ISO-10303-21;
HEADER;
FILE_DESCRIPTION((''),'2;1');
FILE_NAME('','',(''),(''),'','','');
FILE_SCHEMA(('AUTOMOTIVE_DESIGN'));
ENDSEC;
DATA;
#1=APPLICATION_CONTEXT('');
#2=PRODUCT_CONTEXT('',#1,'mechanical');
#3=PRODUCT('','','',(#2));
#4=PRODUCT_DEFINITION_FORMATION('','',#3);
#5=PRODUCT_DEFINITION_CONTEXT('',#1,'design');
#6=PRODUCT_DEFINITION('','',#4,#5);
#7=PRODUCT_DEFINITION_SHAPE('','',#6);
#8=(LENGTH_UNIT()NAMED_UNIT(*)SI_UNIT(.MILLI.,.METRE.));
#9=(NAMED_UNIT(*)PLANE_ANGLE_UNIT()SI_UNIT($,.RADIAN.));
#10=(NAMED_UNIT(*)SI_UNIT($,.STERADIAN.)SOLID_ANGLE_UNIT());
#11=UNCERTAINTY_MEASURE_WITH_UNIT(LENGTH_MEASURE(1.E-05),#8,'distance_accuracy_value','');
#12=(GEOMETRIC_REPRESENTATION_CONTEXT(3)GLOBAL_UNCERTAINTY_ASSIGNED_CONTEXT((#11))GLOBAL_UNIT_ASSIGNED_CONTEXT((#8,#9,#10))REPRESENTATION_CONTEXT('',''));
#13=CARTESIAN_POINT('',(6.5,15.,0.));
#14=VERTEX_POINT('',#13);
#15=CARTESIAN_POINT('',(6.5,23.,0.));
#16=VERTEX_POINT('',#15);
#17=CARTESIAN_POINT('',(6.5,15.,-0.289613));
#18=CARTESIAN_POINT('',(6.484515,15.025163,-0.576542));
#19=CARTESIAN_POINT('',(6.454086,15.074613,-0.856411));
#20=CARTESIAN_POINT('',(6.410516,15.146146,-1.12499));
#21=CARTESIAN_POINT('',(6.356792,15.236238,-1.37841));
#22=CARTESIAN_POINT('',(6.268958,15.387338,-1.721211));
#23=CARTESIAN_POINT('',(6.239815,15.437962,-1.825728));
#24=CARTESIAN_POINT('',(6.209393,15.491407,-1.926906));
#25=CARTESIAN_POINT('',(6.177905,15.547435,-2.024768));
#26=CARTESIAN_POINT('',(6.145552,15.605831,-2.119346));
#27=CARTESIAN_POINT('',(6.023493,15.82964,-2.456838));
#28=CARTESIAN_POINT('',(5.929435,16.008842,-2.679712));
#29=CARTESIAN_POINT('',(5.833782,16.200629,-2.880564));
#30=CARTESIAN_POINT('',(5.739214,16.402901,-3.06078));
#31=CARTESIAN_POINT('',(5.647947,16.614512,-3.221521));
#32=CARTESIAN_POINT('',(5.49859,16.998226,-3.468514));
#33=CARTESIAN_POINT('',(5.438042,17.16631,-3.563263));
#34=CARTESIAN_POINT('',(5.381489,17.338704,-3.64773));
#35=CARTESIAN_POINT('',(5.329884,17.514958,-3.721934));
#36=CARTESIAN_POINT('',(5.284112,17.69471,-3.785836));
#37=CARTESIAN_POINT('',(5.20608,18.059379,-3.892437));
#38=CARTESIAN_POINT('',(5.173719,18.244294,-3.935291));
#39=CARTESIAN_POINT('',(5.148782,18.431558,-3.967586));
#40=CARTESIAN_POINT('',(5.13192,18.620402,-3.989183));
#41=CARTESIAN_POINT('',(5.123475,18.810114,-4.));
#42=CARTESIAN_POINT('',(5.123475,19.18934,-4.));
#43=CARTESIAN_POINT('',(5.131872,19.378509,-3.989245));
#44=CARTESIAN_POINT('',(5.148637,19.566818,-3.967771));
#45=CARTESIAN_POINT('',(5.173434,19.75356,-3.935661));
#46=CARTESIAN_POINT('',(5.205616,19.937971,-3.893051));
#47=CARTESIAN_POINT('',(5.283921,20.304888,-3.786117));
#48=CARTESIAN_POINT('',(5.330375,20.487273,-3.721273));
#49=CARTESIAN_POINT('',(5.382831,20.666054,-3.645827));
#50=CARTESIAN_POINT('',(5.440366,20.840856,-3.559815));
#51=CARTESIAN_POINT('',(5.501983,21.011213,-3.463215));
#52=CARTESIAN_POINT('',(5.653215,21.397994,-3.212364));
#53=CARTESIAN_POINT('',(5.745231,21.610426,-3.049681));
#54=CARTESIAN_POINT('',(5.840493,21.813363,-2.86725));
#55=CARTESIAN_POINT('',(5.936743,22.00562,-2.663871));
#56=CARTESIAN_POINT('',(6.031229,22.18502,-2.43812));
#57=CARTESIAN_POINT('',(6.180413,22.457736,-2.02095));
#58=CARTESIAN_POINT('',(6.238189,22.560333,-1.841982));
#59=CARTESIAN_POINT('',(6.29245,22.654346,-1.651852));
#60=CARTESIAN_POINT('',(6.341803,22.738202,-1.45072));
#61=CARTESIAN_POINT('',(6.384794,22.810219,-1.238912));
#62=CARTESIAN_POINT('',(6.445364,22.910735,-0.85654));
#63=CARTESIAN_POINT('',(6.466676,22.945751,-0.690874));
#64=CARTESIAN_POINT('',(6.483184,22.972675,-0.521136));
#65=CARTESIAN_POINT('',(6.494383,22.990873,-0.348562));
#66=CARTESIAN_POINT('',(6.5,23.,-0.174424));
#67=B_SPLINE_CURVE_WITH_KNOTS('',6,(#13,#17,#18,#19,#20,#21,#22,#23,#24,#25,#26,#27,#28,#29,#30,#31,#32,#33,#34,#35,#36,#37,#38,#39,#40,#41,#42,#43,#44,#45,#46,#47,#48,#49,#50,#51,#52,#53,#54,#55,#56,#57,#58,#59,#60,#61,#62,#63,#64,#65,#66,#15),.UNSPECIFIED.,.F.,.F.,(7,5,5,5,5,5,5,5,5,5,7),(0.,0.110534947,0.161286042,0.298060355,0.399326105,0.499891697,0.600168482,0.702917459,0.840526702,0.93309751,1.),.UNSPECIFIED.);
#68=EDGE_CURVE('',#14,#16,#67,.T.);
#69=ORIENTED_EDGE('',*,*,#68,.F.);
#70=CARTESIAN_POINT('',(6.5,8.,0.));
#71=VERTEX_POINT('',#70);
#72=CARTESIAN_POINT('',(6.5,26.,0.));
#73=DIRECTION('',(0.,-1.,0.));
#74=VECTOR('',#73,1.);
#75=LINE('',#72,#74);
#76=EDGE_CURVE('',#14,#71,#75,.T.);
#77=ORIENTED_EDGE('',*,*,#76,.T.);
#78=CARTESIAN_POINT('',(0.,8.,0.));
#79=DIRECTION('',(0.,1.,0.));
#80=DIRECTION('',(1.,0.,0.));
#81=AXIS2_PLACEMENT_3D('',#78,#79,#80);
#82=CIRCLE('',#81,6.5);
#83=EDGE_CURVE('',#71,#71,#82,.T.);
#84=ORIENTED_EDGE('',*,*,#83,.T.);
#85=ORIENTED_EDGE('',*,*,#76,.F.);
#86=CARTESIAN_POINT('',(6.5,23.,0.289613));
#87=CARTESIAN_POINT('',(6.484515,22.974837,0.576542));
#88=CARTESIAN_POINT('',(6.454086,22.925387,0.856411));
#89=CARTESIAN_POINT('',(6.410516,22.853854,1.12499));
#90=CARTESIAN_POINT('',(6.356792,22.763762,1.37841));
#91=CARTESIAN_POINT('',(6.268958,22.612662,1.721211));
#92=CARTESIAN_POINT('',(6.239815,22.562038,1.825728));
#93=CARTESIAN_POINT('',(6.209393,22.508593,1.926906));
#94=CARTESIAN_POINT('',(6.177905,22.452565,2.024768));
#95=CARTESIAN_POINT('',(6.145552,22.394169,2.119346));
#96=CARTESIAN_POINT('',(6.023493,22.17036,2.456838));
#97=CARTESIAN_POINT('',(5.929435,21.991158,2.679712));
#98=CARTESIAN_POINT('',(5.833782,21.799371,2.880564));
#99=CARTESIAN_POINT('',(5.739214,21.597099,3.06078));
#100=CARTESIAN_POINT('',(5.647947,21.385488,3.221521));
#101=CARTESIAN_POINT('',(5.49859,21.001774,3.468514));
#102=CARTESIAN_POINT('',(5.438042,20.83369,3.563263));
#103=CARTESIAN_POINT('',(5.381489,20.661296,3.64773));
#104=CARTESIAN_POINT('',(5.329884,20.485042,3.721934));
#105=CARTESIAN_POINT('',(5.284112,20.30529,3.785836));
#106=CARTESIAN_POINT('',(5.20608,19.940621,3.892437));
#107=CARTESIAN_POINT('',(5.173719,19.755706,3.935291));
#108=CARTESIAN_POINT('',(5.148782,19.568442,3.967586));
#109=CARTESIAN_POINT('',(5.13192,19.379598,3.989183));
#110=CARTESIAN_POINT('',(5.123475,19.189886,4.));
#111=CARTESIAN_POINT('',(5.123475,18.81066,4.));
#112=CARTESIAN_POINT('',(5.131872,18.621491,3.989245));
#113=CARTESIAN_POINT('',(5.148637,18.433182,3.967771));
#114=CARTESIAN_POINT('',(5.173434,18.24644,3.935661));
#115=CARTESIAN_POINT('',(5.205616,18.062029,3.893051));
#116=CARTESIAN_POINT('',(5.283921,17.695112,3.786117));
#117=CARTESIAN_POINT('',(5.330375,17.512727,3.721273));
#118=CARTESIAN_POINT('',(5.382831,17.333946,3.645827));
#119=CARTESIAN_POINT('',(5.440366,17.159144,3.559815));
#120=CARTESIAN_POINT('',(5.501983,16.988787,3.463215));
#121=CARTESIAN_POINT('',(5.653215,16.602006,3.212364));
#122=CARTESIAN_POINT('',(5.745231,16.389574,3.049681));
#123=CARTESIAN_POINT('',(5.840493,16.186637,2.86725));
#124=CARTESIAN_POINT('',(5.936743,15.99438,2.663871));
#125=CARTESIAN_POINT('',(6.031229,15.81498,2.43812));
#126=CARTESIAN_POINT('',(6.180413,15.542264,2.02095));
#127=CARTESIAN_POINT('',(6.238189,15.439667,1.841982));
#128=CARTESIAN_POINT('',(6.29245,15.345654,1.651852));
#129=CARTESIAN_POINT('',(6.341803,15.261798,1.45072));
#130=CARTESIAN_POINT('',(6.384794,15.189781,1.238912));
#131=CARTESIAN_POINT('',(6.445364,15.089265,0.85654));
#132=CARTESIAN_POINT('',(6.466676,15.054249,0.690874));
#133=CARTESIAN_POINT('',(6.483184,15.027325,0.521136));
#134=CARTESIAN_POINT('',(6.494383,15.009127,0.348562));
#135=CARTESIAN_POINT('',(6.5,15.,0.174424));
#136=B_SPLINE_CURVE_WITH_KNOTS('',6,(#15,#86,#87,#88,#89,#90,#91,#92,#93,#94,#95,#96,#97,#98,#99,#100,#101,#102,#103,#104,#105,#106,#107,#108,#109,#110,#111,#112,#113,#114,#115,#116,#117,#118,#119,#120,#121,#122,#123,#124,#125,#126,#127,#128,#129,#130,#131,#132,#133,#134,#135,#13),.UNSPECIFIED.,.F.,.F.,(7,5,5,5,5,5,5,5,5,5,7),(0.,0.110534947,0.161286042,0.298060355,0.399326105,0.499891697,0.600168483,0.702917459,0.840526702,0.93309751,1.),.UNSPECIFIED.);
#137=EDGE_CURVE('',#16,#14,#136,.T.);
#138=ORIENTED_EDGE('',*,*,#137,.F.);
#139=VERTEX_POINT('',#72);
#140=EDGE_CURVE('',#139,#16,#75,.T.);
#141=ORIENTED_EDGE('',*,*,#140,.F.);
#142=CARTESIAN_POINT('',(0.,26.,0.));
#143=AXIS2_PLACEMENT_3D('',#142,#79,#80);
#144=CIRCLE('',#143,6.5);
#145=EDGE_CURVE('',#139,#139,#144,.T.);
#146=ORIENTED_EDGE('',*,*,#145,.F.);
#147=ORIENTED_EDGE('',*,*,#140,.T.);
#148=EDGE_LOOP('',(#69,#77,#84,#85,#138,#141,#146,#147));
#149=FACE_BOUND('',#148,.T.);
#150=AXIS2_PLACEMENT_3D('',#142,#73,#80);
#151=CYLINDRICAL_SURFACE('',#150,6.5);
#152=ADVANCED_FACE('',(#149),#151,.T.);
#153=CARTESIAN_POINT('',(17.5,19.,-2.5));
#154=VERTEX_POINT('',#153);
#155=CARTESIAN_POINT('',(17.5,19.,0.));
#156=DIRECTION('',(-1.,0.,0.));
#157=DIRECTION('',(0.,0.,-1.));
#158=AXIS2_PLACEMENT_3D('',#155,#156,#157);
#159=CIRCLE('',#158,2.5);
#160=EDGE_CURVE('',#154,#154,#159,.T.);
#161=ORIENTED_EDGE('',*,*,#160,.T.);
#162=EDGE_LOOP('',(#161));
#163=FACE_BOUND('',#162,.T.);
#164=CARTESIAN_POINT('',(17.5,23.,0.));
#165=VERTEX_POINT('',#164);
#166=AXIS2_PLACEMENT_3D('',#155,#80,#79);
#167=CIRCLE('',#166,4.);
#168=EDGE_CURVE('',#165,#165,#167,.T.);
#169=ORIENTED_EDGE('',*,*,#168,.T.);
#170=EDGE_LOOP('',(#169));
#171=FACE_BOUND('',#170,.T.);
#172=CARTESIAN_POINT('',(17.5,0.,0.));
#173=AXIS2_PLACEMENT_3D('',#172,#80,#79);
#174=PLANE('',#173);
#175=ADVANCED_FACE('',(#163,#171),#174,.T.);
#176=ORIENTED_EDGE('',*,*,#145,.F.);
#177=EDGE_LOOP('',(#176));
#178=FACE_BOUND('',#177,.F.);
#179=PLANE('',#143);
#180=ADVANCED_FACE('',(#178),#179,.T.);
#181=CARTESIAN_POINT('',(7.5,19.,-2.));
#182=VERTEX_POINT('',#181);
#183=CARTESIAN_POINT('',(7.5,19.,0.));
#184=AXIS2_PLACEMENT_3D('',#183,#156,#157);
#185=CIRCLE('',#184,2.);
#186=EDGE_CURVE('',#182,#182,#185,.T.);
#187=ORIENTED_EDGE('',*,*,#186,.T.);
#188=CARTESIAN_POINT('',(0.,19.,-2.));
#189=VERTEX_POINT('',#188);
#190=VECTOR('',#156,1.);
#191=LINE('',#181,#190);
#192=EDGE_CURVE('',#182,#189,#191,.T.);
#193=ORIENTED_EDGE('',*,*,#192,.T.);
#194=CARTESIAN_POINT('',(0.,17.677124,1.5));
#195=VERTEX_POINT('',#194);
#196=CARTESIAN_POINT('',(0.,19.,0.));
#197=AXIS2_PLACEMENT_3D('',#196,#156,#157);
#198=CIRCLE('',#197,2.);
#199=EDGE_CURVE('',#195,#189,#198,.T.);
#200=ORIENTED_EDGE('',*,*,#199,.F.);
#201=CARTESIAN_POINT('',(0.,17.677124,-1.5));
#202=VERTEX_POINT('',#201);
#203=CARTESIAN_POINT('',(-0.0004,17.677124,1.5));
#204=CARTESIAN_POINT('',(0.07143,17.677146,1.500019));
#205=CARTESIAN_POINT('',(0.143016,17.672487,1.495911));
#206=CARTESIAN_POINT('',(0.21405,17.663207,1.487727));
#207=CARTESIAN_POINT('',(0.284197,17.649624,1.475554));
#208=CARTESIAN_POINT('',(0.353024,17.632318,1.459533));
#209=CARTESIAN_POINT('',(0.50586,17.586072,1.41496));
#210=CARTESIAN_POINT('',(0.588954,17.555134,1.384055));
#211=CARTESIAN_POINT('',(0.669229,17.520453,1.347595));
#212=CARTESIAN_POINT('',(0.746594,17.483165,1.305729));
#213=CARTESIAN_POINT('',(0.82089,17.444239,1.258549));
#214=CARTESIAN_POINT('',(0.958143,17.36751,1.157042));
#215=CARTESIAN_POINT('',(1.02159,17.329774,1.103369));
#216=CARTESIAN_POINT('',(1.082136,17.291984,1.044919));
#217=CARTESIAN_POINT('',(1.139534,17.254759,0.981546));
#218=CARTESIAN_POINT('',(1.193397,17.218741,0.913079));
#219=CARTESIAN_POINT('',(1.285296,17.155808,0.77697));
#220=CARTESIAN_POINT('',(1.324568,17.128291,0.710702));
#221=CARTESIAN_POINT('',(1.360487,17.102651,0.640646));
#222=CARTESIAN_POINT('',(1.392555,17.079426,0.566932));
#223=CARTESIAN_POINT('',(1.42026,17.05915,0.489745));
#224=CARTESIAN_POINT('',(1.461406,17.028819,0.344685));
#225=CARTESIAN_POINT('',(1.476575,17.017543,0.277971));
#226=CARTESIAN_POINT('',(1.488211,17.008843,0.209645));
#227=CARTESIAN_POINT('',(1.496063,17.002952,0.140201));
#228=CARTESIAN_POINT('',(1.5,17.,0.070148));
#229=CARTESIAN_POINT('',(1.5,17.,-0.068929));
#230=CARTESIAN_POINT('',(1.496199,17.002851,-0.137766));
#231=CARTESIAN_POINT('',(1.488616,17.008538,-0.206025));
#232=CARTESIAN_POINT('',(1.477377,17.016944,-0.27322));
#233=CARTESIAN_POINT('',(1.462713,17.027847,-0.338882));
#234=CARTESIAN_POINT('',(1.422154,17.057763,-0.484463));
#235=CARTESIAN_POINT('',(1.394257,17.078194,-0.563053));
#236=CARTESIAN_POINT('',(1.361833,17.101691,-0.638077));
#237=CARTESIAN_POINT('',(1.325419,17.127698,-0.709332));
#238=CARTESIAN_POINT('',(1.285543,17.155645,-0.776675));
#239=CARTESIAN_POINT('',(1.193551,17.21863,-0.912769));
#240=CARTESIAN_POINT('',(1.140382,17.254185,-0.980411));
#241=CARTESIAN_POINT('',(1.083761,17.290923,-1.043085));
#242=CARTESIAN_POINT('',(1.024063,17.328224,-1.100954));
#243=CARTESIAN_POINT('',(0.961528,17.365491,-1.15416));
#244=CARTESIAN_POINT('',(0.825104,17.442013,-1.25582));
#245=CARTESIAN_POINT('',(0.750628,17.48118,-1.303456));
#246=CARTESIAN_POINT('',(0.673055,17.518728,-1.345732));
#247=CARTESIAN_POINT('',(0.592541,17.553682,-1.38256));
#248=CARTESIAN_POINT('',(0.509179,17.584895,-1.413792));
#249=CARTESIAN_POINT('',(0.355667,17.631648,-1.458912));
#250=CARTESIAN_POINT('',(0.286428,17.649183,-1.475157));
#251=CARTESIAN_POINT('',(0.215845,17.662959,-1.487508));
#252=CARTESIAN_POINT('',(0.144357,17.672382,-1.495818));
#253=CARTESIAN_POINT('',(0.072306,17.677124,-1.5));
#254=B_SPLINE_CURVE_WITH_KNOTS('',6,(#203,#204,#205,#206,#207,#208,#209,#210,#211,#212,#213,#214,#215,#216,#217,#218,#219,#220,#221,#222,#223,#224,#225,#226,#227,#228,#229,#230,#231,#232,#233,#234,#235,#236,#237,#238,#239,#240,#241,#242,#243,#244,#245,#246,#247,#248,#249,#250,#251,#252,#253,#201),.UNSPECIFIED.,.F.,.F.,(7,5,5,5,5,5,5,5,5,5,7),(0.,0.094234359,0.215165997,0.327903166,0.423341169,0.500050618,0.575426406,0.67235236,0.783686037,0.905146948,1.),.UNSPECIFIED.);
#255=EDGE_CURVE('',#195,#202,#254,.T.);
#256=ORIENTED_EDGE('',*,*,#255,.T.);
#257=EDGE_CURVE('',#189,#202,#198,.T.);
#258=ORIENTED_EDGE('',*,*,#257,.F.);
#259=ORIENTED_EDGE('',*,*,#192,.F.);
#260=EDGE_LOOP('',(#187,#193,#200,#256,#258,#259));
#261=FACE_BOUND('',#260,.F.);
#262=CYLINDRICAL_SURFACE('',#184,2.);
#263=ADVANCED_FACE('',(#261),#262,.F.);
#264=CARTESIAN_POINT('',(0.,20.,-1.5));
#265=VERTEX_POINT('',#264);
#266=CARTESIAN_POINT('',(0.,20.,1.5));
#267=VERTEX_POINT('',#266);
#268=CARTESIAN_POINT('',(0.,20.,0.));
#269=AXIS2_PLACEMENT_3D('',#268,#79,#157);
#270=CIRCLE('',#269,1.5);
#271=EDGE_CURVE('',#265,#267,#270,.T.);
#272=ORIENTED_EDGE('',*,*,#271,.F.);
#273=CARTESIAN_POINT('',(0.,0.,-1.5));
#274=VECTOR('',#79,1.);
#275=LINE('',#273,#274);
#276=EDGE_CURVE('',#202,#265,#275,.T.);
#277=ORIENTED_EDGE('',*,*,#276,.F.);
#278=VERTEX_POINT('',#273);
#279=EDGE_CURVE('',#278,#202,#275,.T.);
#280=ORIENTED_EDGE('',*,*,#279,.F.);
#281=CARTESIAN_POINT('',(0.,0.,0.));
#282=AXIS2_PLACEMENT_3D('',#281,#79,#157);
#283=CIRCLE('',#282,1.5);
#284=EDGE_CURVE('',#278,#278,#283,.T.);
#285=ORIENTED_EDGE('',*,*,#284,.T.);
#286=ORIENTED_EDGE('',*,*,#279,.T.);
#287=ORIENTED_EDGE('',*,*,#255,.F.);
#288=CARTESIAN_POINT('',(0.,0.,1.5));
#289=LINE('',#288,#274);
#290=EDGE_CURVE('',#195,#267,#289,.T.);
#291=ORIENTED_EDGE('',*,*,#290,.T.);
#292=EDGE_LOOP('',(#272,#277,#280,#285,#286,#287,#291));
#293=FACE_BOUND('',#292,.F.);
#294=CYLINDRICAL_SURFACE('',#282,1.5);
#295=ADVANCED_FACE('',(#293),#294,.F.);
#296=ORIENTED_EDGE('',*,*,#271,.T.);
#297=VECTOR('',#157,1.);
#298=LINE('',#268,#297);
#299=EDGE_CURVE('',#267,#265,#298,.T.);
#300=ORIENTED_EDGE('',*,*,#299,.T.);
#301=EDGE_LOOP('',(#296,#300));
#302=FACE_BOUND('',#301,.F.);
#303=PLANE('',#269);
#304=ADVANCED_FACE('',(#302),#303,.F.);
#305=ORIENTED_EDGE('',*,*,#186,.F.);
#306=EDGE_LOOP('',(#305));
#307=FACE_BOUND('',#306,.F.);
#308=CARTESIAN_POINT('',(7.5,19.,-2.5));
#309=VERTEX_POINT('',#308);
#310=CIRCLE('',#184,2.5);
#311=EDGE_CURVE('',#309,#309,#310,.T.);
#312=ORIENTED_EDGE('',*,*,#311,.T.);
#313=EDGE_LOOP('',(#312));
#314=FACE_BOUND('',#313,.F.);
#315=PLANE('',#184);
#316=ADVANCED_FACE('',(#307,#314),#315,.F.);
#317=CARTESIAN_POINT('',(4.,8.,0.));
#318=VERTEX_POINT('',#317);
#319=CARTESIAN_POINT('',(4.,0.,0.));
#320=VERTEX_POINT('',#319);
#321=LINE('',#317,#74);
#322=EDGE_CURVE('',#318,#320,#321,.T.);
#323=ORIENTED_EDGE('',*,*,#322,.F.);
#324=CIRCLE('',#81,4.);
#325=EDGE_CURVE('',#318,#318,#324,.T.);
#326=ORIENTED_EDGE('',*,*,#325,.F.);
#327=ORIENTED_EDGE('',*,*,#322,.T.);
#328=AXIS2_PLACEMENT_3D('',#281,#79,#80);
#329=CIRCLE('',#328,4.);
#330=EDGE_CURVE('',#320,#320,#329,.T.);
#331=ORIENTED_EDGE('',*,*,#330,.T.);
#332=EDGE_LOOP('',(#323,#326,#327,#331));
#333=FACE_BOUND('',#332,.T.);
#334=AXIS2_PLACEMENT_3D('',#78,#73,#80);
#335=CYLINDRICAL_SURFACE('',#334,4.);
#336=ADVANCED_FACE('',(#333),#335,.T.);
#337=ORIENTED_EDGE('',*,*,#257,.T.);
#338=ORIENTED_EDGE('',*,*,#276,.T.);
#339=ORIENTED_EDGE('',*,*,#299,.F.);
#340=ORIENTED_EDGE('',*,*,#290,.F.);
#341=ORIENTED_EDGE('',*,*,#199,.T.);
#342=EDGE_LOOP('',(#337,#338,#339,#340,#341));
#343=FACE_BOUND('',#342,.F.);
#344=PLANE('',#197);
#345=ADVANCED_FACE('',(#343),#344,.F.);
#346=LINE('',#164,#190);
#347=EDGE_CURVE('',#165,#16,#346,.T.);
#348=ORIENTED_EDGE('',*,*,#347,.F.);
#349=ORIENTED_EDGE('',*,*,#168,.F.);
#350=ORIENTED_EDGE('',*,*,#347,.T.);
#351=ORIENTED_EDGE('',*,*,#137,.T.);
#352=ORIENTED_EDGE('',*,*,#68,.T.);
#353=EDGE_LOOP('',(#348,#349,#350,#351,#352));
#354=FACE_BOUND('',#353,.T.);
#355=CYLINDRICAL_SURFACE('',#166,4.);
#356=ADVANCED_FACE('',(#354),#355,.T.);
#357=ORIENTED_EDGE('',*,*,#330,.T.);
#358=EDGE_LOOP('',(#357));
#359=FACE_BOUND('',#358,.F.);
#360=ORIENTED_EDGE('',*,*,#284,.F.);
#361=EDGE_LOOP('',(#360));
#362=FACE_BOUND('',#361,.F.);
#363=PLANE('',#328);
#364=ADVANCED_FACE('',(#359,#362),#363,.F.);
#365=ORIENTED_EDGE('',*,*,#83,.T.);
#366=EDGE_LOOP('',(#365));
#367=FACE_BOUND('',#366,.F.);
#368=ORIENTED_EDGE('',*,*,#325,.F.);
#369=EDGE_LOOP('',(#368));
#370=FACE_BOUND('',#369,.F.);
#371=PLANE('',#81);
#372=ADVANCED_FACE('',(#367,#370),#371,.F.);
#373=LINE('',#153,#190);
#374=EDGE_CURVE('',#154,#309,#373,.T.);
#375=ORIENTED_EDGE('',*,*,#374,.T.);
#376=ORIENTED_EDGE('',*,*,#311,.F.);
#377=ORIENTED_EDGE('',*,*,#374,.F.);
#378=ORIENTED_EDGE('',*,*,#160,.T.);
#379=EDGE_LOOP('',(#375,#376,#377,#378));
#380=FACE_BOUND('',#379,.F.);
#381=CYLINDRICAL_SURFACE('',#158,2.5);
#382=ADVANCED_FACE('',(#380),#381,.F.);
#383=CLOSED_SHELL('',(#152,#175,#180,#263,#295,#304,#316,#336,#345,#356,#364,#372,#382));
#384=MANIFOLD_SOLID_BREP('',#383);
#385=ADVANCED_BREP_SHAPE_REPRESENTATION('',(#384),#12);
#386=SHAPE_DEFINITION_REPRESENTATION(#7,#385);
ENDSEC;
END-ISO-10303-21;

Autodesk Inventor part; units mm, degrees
ref_plane "XZ Plane" through (0, 0, 0) normal (0, 1, 0) x (-1, 0, 0)
ref_plane "XY Plane" through (0, 0, 0) normal (0, 0, 1) x (1, 0, 0)
sketch "Sketch1" plane through (0, 0, 0) normal (0, 0, 1) x (1, 0, 0)
  line L0 (0, 0) -> (0, 26)
  line L1 (0, 26) -> (6.5, 26)
  line L2 (6.5, 26) -> (6.5, 8)
  line L3 (6.5, 8) -> (4, 8)
  line L4 (4, 8) -> (4, 0)
  line L5 (4, 0) -> (0, 0)
  dimension "d0" = 13
  dimension "d1" = 8
  dimension "d2" = 8
  dimension "d3" = 18
revolve "Revolution1" add sketch "Sketch1" angle 360 about axis through (0, 0, 0) along (0, 1, 0)
thread "Thread1" size "M8x1.25" class "6g" standard "ISO Metric profile" full length
ref_plane "Work Plane1" through (17.5, 0, 0) normal (1, 0, 0) x (0, 1, 0)
sketch "Sketch2" plane through (17.5, 0, 0) normal (1, 0, 0) x (0, 1, 0)
  line L0 (26, -6.5) -> (26, 6.5) projected
  line L1 (8, 6.5) -> (26, 6.5) projected
  line L2 (8, -6.5) -> (26, -6.5) projected
  line L3 (8, -6.5) -> (8, 6.5) projected
  circle A0 centre (19, 0) radius 4
  point P0 (0, 0)
  point P1 (26, 0)
  dimension "d8" = 8
  dimension "d9" = 7
extrude "Extrusion1" add sketch "Sketch2" against normal up to surface contours A0
sketch "Sketch3" plane through (17.5, 19, 0) normal (1, 0, 0) x (0, 0, -1)
  circle A0 centre (0, 0) radius 4 projected
  point P0 (0, -19)
hole "Hole1" at (17.5, 19, 0) direction (-1, 0, 0) diameter 4 depth 17.5 counterbore diameter 5 counterbore depth 10
sketch "Sketch4" plane through (0, 0, 0) normal (0, -1, 0) x (1, 0, 0)
  circle A0 centre (0, 0) radius 4 projected
  point P0 (0, 0)
hole "Hole2" at (0, 0, 0) direction (0, 1, 0) diameter 3 depth 20
thread "Thread2" size "M8x1.25" class "6g" standard "ISO Metric profile" length 15
properties part number "157" material "Iron, Cast"
